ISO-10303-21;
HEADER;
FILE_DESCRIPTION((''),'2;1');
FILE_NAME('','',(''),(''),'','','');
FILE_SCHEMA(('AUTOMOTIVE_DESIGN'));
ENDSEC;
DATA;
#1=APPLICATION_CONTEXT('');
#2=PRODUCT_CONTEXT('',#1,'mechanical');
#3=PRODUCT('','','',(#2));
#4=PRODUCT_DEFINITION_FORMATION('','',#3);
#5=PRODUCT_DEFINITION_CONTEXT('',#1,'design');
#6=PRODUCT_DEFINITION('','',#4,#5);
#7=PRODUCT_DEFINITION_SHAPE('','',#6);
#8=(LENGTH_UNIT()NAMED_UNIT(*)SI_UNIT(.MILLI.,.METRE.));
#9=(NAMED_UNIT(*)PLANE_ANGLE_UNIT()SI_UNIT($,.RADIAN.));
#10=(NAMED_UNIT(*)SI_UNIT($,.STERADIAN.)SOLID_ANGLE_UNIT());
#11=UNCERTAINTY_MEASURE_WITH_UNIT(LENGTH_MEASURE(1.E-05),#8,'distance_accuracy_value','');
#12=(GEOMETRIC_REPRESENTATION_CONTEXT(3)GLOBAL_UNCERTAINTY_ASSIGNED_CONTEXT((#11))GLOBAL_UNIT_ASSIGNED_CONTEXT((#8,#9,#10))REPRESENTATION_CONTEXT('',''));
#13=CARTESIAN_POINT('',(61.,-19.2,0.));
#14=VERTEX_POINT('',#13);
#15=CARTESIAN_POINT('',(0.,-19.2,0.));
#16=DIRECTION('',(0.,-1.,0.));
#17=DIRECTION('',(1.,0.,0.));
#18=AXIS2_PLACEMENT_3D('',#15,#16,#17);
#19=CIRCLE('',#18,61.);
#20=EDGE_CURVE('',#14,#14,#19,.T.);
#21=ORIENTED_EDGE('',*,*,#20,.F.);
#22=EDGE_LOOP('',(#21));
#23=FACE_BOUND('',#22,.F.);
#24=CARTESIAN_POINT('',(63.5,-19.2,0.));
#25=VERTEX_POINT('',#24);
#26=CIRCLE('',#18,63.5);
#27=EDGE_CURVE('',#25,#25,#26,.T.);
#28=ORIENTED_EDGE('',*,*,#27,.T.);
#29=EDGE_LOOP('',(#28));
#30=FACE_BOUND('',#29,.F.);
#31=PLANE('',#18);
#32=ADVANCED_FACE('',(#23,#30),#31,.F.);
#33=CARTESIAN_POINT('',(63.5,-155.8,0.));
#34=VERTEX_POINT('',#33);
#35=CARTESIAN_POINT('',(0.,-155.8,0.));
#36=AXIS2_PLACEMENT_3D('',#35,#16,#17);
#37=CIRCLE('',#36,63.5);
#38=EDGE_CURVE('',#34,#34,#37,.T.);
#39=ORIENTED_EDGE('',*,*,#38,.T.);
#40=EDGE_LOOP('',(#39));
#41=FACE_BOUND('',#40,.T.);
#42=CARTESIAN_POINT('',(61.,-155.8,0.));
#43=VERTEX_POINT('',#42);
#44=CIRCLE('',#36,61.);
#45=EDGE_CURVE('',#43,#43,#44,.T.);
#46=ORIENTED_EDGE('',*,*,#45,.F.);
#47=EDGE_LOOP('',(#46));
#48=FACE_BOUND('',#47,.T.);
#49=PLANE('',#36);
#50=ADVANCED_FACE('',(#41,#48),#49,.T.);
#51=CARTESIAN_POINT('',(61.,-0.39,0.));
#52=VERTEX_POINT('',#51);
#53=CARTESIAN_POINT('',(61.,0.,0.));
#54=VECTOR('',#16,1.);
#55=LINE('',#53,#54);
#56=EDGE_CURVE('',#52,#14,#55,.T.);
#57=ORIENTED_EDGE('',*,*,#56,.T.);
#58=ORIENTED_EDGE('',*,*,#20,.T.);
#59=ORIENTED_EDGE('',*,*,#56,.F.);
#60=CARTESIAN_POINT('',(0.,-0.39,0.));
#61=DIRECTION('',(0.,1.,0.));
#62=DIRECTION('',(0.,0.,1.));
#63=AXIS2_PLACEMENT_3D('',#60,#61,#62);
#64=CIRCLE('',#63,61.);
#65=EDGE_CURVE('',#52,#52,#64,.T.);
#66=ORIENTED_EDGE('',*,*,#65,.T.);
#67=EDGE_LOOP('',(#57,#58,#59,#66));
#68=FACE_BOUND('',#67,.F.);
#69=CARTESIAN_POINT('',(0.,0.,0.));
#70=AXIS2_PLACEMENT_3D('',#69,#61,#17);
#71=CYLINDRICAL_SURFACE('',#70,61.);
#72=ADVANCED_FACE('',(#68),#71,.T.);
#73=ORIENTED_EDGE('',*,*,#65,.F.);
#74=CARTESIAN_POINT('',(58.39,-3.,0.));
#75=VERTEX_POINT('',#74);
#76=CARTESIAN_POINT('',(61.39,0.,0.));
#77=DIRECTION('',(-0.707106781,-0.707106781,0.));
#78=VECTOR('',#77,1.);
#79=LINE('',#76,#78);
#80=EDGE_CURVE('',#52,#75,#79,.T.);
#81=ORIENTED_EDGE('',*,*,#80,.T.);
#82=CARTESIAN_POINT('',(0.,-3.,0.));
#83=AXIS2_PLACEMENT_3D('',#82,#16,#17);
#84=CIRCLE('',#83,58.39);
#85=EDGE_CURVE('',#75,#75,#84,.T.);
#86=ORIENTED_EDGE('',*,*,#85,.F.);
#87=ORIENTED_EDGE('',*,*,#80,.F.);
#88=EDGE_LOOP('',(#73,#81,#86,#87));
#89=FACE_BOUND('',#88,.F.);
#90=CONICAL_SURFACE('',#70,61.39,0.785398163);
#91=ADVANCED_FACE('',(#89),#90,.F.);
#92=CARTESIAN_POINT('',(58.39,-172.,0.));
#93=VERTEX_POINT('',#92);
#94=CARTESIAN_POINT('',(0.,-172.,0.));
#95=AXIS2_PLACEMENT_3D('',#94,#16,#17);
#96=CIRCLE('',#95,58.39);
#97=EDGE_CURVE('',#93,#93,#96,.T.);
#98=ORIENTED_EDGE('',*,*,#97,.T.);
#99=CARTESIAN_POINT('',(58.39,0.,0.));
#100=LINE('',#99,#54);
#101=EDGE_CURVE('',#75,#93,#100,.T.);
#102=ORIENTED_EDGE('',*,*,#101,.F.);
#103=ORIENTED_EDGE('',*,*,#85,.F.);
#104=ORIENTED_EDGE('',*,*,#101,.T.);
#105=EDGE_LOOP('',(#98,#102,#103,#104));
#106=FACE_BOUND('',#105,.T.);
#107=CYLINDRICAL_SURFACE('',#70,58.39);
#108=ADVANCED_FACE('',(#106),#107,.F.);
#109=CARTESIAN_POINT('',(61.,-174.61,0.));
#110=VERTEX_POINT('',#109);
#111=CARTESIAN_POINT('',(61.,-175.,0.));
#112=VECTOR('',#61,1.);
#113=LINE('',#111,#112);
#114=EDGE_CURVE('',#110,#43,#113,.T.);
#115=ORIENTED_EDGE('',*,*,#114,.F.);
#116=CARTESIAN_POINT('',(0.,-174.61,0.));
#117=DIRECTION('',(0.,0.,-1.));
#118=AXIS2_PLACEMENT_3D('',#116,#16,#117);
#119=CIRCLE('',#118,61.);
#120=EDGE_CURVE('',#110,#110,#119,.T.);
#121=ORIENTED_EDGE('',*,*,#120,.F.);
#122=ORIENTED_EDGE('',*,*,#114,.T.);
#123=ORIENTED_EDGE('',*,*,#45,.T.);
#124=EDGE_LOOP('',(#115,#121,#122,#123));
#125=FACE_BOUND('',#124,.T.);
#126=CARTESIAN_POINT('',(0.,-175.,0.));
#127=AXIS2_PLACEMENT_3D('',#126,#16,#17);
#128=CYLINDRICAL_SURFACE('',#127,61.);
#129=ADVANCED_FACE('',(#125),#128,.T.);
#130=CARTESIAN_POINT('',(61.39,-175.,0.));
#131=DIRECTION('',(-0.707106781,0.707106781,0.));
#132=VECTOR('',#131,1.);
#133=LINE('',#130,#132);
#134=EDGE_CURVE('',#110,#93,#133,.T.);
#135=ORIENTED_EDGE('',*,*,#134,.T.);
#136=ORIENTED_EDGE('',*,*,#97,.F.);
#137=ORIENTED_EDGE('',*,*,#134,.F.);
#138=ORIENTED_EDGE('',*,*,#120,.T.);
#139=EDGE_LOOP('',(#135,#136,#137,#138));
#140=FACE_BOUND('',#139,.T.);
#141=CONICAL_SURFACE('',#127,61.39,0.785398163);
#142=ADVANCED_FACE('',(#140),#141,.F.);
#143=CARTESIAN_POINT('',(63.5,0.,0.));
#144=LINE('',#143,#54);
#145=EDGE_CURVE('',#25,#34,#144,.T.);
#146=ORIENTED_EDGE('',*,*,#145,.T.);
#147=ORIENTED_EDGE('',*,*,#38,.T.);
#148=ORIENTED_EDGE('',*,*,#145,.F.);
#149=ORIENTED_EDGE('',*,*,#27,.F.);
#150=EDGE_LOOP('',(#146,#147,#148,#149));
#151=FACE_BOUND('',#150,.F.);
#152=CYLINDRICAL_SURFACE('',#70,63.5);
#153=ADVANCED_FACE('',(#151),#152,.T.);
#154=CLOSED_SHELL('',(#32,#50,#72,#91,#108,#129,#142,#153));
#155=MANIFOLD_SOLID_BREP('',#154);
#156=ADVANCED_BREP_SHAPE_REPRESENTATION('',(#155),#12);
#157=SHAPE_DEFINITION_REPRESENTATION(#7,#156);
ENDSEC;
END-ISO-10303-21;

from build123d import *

# Parameters (mm, degrees)
F0_R     = 63.5
F0_R_2   = 58.39
F1_DEPTH = 175
F2_R     = 63.5
F2_R_2   = 61
F3_DEPTH = 19.2
F4_R     = 63.5
F4_R_2   = 61
F5_DEPTH = 19.2


# Not quite as in the source:
# - a fillet or chamfer that OpenCascade refuses, or shapes differently, is made with other operations: its cross-section is extruded or revolved along the edge and cut away or added


with BuildPart() as f1:
    # F0 (on Front) → F1 (new body)
    with BuildSketch(Plane.XZ):
        Circle(F0_R)
        Circle(F0_R_2, mode=Mode.SUBTRACT)
    extrude(amount=F1_DEPTH)

    # F2 (on Front) → F3 (cut)
    with BuildSketch(Plane.XZ):
        Circle(F2_R)
        Circle(F2_R_2, mode=Mode.SUBTRACT)
    extrude(amount=F3_DEPTH, mode=Mode.SUBTRACT)

    # F4 (on face) → F5 (cut)
    with BuildSketch(Plane.XZ.offset(175)):
        Circle(F4_R)
        Circle(F4_R_2, mode=Mode.SUBTRACT)
    extrude(amount=-F5_DEPTH, mode=Mode.SUBTRACT)

    # F6: chamfer of 3 on 2 edges, made by hand

    # F6_s1 → F6_t2 (revolve, cut)
    with BuildSketch(Plane.XY):
        Polygon((61.39, -175), (58.39, -172), (58.39, -175), align=None)
    revolve(axis=Axis((0, -175, 0), (0, -1, 0)), mode=Mode.SUBTRACT)

    # F6_s3 → F6_t4 (revolve, cut)
    with BuildSketch(Plane.XY):
        Polygon((61.39, 0), (58.39, -3), (58.39, 0), align=None)
    revolve(axis=Axis((0, 0, 0), (0, -1, 0)), mode=Mode.SUBTRACT)


solid = f1.part
